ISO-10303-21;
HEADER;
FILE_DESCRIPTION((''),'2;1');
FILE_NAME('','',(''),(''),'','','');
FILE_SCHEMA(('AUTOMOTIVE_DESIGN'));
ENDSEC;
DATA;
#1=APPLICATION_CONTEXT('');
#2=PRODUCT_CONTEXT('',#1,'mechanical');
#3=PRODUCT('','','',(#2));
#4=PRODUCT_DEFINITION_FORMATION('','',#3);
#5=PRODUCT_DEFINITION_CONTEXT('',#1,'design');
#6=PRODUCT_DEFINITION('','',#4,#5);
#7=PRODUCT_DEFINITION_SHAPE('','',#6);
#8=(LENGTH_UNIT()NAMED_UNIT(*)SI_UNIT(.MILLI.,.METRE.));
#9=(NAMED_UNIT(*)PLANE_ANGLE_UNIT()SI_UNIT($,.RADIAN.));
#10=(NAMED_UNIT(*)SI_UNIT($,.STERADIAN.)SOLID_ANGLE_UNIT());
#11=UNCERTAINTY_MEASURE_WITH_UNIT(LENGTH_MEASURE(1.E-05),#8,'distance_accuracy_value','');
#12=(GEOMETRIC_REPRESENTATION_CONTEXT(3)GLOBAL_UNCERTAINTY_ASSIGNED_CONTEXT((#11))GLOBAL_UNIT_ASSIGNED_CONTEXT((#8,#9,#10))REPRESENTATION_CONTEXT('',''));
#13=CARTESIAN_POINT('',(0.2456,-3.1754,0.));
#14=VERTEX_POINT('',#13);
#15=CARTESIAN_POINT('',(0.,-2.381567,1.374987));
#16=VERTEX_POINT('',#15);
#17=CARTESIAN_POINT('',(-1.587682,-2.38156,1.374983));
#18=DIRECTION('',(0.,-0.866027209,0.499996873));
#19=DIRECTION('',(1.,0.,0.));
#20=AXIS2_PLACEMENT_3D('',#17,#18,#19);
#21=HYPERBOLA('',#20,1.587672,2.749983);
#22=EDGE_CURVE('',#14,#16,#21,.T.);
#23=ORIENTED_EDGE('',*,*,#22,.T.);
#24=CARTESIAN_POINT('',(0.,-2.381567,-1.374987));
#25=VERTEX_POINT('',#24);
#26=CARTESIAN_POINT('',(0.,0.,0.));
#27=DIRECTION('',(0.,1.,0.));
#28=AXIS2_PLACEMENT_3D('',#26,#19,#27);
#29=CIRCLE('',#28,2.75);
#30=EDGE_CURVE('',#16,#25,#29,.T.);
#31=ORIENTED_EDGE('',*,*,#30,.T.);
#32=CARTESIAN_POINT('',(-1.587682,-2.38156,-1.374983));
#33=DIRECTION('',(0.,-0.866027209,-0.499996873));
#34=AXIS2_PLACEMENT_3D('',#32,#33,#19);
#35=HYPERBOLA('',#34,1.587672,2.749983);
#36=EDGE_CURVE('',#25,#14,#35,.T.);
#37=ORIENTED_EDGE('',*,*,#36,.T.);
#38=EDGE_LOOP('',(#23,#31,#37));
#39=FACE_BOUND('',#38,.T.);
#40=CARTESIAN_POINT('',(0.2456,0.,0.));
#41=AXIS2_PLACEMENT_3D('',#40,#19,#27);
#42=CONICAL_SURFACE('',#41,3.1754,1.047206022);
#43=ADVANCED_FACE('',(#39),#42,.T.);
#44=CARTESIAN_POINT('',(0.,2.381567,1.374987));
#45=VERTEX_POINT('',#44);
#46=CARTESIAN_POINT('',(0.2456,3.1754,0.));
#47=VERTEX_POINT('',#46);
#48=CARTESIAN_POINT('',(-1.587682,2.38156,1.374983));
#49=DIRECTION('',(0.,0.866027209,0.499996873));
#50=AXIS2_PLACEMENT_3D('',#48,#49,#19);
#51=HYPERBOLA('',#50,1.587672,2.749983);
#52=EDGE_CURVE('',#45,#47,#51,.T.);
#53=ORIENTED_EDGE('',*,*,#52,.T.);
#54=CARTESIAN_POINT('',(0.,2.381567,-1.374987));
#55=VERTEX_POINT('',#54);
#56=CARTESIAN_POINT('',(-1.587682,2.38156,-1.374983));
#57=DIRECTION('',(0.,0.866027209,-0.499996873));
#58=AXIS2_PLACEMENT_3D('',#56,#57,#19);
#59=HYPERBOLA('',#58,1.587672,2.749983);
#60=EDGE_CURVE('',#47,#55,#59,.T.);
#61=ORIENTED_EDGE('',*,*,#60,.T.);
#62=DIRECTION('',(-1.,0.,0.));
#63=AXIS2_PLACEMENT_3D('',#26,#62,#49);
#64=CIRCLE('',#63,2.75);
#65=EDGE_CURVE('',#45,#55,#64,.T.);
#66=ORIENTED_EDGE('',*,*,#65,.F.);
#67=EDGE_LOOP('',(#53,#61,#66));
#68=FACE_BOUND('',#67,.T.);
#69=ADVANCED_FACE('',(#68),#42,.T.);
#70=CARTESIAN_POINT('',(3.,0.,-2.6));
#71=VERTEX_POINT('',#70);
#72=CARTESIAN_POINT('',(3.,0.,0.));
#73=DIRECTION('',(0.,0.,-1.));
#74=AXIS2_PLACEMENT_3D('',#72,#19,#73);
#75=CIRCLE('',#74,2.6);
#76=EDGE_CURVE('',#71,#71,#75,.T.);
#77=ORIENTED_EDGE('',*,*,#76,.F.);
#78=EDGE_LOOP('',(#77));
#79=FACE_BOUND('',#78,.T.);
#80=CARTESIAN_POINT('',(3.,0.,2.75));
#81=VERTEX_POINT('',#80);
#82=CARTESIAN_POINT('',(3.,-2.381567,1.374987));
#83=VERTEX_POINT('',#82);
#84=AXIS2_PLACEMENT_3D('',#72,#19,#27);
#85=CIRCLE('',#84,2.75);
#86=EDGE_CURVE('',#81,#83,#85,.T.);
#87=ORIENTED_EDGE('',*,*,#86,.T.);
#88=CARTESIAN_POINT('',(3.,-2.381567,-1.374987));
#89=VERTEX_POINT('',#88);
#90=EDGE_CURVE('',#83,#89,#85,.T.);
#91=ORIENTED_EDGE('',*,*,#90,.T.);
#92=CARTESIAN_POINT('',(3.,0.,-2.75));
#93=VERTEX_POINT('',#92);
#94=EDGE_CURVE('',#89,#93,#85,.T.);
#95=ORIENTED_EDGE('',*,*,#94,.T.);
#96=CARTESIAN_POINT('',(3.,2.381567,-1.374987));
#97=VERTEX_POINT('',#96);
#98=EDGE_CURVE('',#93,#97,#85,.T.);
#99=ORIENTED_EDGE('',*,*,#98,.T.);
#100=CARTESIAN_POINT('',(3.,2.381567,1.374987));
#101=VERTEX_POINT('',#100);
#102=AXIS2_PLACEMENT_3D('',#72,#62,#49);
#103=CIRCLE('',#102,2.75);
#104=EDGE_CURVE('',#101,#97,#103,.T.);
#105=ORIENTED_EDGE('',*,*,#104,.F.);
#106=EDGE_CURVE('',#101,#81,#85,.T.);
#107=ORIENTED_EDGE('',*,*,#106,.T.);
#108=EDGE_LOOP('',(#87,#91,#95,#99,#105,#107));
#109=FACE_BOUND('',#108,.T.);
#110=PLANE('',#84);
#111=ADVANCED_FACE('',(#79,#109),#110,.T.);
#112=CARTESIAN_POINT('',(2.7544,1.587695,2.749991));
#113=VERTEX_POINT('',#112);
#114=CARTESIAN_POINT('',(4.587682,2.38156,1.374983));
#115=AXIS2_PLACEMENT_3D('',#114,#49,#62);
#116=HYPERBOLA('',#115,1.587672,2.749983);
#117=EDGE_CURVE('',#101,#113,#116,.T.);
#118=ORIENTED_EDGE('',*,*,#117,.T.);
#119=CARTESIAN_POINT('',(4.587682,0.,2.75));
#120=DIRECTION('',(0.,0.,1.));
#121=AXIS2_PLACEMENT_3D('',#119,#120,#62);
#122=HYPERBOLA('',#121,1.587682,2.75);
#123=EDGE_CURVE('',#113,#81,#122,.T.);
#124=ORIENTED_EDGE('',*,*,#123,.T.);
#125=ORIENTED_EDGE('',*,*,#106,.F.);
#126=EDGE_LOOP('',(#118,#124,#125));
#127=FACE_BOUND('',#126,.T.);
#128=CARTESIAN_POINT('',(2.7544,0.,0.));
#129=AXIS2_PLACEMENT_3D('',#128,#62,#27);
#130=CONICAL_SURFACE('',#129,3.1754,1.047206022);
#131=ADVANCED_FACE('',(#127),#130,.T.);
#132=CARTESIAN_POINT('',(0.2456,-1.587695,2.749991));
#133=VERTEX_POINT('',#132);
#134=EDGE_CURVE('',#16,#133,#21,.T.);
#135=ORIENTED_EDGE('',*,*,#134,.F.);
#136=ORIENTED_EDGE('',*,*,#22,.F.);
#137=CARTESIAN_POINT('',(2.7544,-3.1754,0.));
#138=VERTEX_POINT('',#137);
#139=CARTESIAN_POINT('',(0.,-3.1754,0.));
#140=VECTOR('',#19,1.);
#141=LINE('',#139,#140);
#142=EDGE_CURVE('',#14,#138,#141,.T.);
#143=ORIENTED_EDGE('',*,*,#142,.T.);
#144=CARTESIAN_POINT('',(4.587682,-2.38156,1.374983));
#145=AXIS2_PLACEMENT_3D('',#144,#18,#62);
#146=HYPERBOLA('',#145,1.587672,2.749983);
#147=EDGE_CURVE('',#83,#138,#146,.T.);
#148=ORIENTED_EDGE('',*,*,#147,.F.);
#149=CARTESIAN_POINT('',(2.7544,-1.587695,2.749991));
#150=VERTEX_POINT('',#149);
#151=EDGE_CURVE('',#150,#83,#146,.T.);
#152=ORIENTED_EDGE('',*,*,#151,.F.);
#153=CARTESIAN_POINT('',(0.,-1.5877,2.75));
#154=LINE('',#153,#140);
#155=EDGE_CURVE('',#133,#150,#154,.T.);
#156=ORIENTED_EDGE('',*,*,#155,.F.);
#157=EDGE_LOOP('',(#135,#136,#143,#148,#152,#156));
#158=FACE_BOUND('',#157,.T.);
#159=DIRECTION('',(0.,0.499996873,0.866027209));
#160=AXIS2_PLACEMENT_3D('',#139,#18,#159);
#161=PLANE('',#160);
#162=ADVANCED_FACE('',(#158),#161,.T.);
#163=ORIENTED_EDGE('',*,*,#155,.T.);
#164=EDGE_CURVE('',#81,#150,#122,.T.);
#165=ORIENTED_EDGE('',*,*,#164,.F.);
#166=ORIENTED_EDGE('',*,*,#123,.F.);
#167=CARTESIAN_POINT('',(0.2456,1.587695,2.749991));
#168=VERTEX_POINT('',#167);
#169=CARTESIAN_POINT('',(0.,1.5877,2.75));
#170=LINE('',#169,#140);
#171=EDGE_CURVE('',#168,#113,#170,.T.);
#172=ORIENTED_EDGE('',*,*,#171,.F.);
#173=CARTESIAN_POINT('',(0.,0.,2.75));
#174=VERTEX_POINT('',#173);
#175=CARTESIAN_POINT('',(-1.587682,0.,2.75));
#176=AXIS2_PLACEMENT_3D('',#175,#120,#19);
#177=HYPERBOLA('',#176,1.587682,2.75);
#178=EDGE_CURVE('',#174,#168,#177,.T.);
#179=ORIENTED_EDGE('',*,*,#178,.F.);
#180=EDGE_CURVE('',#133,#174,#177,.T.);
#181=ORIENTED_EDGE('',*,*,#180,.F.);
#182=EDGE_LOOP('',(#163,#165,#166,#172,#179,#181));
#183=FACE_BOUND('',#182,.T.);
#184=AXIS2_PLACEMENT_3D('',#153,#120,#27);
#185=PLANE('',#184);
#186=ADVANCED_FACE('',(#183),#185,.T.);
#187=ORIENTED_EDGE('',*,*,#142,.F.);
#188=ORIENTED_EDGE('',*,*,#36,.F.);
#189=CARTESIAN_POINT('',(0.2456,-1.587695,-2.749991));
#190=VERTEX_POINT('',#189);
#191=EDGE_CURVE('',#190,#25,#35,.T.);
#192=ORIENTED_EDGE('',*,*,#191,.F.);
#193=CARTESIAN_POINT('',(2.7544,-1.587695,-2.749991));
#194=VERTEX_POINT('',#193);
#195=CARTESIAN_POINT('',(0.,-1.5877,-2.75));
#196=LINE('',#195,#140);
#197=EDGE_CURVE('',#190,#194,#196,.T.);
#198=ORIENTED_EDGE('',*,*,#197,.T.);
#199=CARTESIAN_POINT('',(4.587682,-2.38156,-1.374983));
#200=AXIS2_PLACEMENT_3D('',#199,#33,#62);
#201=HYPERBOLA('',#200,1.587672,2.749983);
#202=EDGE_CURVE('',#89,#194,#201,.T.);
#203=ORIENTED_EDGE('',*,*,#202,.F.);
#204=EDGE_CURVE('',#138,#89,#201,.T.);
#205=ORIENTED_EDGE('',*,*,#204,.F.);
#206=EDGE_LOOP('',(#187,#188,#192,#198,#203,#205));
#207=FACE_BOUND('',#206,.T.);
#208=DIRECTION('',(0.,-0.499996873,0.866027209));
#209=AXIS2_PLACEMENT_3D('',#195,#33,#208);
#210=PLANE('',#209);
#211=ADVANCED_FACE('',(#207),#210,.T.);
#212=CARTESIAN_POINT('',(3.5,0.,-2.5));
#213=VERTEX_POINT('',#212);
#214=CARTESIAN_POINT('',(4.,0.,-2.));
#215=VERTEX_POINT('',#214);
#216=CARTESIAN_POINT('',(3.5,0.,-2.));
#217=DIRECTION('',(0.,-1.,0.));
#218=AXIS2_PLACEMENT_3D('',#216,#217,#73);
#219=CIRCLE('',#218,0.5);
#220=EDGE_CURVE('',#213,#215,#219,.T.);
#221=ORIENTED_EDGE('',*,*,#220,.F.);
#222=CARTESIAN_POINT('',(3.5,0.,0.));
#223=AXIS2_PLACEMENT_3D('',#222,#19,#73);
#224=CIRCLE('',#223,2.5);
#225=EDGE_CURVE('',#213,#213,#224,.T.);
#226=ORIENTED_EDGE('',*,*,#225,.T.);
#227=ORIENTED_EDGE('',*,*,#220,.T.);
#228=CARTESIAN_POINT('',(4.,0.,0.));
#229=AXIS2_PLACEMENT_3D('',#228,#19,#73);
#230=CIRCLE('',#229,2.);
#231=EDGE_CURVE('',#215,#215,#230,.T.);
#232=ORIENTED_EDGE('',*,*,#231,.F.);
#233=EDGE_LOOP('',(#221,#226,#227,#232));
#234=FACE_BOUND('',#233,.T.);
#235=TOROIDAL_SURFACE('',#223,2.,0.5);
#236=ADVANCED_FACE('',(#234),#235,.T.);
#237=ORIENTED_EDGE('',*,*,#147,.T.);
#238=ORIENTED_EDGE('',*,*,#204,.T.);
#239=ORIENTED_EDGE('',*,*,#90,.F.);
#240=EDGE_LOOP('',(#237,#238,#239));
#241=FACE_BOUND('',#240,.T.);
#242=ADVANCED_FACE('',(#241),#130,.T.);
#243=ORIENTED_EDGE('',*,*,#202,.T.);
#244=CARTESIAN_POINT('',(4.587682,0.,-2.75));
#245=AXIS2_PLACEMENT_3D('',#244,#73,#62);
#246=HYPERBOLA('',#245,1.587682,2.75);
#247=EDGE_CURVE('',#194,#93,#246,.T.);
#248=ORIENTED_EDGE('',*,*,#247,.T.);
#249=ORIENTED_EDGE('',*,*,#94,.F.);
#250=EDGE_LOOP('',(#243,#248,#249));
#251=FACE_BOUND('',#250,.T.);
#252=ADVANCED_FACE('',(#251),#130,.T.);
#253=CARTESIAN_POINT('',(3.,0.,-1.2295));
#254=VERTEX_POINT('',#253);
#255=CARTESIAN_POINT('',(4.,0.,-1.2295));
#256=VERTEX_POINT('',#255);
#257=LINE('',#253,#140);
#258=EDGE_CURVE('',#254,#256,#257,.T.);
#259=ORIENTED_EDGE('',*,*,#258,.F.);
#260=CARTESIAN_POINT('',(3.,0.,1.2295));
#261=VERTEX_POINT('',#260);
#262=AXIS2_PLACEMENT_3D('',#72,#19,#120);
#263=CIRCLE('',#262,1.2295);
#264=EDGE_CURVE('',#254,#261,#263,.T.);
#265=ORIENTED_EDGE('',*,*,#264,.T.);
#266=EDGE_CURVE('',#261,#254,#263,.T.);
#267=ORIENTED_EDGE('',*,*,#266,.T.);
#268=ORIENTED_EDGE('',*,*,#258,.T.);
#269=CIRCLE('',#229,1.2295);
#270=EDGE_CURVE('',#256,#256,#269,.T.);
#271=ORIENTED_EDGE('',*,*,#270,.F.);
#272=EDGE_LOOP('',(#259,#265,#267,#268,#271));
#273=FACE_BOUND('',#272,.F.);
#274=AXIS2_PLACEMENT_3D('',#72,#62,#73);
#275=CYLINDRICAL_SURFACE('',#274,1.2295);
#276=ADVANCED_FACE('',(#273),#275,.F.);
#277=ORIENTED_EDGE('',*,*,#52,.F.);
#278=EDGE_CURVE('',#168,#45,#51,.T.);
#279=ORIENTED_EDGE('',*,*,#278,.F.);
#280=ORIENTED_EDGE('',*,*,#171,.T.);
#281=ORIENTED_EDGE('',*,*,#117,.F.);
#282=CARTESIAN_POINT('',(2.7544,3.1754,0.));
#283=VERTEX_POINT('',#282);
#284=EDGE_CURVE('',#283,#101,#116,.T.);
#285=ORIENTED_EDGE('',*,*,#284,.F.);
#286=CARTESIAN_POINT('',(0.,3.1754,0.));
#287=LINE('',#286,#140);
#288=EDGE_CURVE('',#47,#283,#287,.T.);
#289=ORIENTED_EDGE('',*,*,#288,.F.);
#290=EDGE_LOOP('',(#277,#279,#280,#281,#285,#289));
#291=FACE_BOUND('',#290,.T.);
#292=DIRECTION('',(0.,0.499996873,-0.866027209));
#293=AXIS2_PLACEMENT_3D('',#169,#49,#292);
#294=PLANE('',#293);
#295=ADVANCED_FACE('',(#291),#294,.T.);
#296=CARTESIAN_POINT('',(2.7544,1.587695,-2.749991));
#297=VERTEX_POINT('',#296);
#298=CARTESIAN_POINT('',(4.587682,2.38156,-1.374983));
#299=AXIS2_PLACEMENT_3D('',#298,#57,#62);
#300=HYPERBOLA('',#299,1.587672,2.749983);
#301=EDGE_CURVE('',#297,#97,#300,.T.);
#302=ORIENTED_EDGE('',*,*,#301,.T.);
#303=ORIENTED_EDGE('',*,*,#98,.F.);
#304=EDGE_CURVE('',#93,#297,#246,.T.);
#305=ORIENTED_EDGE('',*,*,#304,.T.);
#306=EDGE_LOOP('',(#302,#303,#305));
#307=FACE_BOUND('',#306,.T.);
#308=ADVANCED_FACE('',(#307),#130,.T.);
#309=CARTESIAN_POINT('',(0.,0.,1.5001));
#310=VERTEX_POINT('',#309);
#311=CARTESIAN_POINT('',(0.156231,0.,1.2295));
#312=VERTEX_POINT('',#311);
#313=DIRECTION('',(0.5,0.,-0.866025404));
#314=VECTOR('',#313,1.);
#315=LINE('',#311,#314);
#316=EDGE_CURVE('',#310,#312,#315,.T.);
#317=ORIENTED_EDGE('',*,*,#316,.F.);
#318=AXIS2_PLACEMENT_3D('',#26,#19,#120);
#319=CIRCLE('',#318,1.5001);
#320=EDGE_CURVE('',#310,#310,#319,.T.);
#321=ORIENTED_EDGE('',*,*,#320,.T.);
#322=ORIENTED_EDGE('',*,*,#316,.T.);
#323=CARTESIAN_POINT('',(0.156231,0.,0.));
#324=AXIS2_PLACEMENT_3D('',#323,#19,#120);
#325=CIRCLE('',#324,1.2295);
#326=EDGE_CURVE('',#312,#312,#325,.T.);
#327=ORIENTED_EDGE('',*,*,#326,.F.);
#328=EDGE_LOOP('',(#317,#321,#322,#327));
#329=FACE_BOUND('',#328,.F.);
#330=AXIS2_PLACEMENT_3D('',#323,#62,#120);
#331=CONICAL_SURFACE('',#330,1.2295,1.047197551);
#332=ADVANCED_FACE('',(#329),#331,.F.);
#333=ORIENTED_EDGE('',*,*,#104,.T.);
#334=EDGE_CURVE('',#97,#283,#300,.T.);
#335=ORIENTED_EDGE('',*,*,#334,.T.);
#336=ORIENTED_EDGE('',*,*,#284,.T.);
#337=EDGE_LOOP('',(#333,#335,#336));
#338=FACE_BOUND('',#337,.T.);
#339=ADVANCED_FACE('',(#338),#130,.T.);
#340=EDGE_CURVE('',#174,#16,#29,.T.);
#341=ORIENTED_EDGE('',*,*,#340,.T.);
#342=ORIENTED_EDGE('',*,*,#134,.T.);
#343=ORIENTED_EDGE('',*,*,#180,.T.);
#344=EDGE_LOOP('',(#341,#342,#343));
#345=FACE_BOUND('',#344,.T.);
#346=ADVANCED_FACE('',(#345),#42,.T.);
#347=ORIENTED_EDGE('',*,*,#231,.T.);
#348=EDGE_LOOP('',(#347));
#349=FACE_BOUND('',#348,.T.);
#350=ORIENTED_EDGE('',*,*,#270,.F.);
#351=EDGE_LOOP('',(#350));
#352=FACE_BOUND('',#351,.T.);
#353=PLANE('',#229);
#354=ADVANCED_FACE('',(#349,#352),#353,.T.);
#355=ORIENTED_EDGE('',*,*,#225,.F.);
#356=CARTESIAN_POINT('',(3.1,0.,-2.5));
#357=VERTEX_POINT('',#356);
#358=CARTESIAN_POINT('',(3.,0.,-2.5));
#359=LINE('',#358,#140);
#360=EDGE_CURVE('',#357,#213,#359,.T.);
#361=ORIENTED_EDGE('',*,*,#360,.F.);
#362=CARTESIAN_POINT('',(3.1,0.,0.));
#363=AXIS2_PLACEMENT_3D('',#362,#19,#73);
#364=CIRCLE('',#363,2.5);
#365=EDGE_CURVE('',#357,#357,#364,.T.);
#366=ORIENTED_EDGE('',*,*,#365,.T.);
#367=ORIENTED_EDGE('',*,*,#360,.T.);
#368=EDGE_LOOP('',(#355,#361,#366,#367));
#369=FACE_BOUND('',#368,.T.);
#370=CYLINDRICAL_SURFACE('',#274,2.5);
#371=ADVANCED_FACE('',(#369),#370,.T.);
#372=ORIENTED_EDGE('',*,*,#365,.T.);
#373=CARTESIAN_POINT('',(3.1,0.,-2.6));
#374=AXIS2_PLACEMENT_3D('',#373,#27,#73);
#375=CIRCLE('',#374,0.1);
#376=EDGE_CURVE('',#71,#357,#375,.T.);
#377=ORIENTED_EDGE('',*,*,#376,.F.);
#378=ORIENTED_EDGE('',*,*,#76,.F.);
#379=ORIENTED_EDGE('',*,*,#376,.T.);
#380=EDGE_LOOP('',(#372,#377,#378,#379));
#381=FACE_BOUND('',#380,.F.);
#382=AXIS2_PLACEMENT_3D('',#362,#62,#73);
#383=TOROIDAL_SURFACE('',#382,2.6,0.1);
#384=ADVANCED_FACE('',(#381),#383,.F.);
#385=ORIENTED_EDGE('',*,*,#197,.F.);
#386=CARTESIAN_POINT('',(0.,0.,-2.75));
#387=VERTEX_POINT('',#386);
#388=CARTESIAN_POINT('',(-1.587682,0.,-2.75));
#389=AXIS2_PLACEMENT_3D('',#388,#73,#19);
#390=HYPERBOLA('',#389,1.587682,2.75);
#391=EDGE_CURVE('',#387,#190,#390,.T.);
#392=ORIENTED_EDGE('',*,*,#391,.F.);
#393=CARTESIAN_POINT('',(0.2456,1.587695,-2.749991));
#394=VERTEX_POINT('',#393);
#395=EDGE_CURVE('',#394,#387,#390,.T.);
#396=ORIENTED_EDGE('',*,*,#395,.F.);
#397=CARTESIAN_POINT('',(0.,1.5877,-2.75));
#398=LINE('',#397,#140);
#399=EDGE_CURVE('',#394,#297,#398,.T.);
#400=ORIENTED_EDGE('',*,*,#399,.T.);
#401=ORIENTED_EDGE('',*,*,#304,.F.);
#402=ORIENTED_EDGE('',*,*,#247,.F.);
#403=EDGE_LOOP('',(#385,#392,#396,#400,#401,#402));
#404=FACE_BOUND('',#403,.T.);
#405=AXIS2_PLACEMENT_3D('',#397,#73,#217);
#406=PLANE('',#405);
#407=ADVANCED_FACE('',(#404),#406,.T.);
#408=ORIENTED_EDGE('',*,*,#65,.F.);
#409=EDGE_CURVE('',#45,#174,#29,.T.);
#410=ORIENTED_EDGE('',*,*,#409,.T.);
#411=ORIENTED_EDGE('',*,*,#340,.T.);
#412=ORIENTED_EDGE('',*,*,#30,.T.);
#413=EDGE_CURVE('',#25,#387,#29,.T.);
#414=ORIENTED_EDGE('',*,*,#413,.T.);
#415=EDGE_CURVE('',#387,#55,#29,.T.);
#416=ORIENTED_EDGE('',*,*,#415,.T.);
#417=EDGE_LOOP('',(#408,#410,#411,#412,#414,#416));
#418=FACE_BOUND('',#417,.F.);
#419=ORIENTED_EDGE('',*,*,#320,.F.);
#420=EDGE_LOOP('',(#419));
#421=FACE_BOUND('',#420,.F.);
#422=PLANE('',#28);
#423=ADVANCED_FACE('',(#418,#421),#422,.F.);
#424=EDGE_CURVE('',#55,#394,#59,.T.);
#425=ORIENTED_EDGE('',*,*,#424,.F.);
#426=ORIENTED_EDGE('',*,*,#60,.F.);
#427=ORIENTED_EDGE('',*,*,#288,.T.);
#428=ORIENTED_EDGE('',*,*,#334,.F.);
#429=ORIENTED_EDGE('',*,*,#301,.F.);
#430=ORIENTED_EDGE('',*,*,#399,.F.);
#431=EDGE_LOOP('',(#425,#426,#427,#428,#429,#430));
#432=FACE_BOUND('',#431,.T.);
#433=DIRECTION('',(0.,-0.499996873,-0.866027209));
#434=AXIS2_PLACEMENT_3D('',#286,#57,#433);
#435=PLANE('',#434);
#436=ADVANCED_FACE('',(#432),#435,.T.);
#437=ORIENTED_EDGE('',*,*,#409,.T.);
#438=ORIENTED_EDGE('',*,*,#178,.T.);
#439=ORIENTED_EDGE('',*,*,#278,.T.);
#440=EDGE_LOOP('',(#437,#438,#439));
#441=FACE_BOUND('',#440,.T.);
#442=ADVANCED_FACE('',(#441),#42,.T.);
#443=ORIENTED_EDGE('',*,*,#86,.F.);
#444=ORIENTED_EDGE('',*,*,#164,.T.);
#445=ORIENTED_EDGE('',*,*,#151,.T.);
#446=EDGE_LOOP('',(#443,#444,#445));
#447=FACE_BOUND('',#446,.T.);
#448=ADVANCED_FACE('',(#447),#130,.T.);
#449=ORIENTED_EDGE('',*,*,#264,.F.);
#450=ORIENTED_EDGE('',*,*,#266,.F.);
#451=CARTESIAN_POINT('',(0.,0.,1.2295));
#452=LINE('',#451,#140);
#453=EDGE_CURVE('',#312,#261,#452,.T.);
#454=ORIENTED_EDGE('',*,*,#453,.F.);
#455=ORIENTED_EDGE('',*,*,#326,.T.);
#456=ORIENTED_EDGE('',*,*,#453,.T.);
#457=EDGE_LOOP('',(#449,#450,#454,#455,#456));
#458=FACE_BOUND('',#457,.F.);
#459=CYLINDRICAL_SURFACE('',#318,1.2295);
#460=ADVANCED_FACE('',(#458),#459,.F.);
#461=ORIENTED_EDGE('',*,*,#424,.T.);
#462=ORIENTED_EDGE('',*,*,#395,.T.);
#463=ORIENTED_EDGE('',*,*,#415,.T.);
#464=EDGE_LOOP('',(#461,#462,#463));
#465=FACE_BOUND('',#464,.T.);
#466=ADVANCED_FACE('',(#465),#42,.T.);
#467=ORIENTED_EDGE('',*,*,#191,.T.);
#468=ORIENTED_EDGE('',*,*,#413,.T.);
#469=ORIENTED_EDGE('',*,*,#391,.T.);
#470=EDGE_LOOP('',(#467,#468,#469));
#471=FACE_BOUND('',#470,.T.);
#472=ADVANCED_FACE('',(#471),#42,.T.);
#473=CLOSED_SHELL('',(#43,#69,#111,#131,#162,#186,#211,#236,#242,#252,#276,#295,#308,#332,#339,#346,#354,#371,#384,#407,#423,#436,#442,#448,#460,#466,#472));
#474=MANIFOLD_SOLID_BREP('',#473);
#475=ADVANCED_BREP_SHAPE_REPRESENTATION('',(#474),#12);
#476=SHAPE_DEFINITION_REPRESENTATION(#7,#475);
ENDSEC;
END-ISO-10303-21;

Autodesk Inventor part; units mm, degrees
ref_plane "YZ Plane" through (0, 0, 0) normal (1, 0, 0) x (0, 1, 0)
sketch "Sketch1" plane through (0, 0, 0) normal (1, 0, 0) x (0, 1, 0)
  line L0 (3.1754, 0) -> (1.5877, -2.75)
  line L1 (1.5877, -2.75) -> (-1.5877, -2.75)
  line L2 (-1.5877, -2.75) -> (-3.1754, 0)
  line L3 (-3.1754, 0) -> (-1.5877, 2.75)
  line L4 (-1.5877, 2.75) -> (1.5877, 2.75)
  line L5 (1.5877, 2.75) -> (3.1754, 0)
  point P0 (0, 0)
  point P1 (0, 0)
  dimension "d0" = 6.3509
extrude "Body" add sketch "Sketch1" along normal blind 3
sketch "Sketch2" plane through (0, 0, 0) normal (-1, 0, 0) x (0, 0, 1)
  point P0 (0, 0)
hole "Thread" at (0, 0, 0) direction (1, 0, 0) diameter 2.459 end through all thread size "M3x0.5" class "6H" standard "ISO Metric profile"
chamfer "Chamfer1" distance 0.2706 angle 30 1 edges at (0, 0, -1.2295) measured on face at (0, -1.925, -1.1495)
sketch "Sketch3" plane through (0, 0, 0) normal (0, 0, 1) x (1, 0, 0)
  line L0 (0, 3.1754) -> (3, 3.1754) projected
  line L1 (3, 1.5877) -> (3, 3.1754) projected
  line L2 (-0.48, 0) -> (2.88, 0) projected
  line L3 (2.7544, 3.1754) -> (3, 2.75)
  dimension "d3" = 5.5
  dimension "d4" = 30
revolve "Chamfer3" cut sketch "Sketch3" angle 360 about axis through (-10, 0, 0) along (1, 0, 0)
ref_plane "Work Plane1" through (8.9209, 0, 0) normal (0, 0.8660254, -0.5) x (-1, 0, 0)
ref_plane "Work Plane2" through (1.5, 0, 0) normal (1, 0, 0) x (0, 0, -1)
mirror "Mirror1" about plane through (1.5, 0, 0) normal (1, 0, 0) of "Chamfer3"
sketch "Sketch6" plane through (3, 0, 0) normal (1, 0, 0) x (0, 0, -1)
  circle A0 centre (0, 0) radius 1.2295 projected
  circle A1 centre (0, 0) radius 2.5
  dimension "d26" = 5
extrude "Extrusion2" add sketch "Sketch6" along normal blind 1
fillet "Fillet1" radius 0.5 1 edges at (4, 0, 2.5)
fillet "Fillet2" radius 0.1 1 edges at (3, 0, 2.5)
equation "\"d0\" = 1.1547 * SW"
equation "\"d13\" = -0.5 * GD1 + 0.5 * NND"
equation "\"d21\" = -0.5 * GD1 + 0.5 * NND"
equation "\"d3\" = SW01"
equation "\"d4\" = ANG2"
equation "\"ANG2\" = 30deg"
equation "\"NND\" = 3"
equation "\"KOH\" = 2.4"
equation "\"SW\" = 5.5"
equation "\"SW01\" = SW"
equation "\"GUL\" = 0.541266 * PTC"
equation "\"TOA\" = 30deg"
equation "\"PTC\" = 0.5"
equation "\"E0\" = 1.155 * SW"
equation "\"THREADDIA\" = 3"
equation "\"GAL\" = 0.541266 * PTC"
equation "\"GD1\" = 2.458734"
properties part number "M3 Nylon Nut" material "Stainless Steel"
